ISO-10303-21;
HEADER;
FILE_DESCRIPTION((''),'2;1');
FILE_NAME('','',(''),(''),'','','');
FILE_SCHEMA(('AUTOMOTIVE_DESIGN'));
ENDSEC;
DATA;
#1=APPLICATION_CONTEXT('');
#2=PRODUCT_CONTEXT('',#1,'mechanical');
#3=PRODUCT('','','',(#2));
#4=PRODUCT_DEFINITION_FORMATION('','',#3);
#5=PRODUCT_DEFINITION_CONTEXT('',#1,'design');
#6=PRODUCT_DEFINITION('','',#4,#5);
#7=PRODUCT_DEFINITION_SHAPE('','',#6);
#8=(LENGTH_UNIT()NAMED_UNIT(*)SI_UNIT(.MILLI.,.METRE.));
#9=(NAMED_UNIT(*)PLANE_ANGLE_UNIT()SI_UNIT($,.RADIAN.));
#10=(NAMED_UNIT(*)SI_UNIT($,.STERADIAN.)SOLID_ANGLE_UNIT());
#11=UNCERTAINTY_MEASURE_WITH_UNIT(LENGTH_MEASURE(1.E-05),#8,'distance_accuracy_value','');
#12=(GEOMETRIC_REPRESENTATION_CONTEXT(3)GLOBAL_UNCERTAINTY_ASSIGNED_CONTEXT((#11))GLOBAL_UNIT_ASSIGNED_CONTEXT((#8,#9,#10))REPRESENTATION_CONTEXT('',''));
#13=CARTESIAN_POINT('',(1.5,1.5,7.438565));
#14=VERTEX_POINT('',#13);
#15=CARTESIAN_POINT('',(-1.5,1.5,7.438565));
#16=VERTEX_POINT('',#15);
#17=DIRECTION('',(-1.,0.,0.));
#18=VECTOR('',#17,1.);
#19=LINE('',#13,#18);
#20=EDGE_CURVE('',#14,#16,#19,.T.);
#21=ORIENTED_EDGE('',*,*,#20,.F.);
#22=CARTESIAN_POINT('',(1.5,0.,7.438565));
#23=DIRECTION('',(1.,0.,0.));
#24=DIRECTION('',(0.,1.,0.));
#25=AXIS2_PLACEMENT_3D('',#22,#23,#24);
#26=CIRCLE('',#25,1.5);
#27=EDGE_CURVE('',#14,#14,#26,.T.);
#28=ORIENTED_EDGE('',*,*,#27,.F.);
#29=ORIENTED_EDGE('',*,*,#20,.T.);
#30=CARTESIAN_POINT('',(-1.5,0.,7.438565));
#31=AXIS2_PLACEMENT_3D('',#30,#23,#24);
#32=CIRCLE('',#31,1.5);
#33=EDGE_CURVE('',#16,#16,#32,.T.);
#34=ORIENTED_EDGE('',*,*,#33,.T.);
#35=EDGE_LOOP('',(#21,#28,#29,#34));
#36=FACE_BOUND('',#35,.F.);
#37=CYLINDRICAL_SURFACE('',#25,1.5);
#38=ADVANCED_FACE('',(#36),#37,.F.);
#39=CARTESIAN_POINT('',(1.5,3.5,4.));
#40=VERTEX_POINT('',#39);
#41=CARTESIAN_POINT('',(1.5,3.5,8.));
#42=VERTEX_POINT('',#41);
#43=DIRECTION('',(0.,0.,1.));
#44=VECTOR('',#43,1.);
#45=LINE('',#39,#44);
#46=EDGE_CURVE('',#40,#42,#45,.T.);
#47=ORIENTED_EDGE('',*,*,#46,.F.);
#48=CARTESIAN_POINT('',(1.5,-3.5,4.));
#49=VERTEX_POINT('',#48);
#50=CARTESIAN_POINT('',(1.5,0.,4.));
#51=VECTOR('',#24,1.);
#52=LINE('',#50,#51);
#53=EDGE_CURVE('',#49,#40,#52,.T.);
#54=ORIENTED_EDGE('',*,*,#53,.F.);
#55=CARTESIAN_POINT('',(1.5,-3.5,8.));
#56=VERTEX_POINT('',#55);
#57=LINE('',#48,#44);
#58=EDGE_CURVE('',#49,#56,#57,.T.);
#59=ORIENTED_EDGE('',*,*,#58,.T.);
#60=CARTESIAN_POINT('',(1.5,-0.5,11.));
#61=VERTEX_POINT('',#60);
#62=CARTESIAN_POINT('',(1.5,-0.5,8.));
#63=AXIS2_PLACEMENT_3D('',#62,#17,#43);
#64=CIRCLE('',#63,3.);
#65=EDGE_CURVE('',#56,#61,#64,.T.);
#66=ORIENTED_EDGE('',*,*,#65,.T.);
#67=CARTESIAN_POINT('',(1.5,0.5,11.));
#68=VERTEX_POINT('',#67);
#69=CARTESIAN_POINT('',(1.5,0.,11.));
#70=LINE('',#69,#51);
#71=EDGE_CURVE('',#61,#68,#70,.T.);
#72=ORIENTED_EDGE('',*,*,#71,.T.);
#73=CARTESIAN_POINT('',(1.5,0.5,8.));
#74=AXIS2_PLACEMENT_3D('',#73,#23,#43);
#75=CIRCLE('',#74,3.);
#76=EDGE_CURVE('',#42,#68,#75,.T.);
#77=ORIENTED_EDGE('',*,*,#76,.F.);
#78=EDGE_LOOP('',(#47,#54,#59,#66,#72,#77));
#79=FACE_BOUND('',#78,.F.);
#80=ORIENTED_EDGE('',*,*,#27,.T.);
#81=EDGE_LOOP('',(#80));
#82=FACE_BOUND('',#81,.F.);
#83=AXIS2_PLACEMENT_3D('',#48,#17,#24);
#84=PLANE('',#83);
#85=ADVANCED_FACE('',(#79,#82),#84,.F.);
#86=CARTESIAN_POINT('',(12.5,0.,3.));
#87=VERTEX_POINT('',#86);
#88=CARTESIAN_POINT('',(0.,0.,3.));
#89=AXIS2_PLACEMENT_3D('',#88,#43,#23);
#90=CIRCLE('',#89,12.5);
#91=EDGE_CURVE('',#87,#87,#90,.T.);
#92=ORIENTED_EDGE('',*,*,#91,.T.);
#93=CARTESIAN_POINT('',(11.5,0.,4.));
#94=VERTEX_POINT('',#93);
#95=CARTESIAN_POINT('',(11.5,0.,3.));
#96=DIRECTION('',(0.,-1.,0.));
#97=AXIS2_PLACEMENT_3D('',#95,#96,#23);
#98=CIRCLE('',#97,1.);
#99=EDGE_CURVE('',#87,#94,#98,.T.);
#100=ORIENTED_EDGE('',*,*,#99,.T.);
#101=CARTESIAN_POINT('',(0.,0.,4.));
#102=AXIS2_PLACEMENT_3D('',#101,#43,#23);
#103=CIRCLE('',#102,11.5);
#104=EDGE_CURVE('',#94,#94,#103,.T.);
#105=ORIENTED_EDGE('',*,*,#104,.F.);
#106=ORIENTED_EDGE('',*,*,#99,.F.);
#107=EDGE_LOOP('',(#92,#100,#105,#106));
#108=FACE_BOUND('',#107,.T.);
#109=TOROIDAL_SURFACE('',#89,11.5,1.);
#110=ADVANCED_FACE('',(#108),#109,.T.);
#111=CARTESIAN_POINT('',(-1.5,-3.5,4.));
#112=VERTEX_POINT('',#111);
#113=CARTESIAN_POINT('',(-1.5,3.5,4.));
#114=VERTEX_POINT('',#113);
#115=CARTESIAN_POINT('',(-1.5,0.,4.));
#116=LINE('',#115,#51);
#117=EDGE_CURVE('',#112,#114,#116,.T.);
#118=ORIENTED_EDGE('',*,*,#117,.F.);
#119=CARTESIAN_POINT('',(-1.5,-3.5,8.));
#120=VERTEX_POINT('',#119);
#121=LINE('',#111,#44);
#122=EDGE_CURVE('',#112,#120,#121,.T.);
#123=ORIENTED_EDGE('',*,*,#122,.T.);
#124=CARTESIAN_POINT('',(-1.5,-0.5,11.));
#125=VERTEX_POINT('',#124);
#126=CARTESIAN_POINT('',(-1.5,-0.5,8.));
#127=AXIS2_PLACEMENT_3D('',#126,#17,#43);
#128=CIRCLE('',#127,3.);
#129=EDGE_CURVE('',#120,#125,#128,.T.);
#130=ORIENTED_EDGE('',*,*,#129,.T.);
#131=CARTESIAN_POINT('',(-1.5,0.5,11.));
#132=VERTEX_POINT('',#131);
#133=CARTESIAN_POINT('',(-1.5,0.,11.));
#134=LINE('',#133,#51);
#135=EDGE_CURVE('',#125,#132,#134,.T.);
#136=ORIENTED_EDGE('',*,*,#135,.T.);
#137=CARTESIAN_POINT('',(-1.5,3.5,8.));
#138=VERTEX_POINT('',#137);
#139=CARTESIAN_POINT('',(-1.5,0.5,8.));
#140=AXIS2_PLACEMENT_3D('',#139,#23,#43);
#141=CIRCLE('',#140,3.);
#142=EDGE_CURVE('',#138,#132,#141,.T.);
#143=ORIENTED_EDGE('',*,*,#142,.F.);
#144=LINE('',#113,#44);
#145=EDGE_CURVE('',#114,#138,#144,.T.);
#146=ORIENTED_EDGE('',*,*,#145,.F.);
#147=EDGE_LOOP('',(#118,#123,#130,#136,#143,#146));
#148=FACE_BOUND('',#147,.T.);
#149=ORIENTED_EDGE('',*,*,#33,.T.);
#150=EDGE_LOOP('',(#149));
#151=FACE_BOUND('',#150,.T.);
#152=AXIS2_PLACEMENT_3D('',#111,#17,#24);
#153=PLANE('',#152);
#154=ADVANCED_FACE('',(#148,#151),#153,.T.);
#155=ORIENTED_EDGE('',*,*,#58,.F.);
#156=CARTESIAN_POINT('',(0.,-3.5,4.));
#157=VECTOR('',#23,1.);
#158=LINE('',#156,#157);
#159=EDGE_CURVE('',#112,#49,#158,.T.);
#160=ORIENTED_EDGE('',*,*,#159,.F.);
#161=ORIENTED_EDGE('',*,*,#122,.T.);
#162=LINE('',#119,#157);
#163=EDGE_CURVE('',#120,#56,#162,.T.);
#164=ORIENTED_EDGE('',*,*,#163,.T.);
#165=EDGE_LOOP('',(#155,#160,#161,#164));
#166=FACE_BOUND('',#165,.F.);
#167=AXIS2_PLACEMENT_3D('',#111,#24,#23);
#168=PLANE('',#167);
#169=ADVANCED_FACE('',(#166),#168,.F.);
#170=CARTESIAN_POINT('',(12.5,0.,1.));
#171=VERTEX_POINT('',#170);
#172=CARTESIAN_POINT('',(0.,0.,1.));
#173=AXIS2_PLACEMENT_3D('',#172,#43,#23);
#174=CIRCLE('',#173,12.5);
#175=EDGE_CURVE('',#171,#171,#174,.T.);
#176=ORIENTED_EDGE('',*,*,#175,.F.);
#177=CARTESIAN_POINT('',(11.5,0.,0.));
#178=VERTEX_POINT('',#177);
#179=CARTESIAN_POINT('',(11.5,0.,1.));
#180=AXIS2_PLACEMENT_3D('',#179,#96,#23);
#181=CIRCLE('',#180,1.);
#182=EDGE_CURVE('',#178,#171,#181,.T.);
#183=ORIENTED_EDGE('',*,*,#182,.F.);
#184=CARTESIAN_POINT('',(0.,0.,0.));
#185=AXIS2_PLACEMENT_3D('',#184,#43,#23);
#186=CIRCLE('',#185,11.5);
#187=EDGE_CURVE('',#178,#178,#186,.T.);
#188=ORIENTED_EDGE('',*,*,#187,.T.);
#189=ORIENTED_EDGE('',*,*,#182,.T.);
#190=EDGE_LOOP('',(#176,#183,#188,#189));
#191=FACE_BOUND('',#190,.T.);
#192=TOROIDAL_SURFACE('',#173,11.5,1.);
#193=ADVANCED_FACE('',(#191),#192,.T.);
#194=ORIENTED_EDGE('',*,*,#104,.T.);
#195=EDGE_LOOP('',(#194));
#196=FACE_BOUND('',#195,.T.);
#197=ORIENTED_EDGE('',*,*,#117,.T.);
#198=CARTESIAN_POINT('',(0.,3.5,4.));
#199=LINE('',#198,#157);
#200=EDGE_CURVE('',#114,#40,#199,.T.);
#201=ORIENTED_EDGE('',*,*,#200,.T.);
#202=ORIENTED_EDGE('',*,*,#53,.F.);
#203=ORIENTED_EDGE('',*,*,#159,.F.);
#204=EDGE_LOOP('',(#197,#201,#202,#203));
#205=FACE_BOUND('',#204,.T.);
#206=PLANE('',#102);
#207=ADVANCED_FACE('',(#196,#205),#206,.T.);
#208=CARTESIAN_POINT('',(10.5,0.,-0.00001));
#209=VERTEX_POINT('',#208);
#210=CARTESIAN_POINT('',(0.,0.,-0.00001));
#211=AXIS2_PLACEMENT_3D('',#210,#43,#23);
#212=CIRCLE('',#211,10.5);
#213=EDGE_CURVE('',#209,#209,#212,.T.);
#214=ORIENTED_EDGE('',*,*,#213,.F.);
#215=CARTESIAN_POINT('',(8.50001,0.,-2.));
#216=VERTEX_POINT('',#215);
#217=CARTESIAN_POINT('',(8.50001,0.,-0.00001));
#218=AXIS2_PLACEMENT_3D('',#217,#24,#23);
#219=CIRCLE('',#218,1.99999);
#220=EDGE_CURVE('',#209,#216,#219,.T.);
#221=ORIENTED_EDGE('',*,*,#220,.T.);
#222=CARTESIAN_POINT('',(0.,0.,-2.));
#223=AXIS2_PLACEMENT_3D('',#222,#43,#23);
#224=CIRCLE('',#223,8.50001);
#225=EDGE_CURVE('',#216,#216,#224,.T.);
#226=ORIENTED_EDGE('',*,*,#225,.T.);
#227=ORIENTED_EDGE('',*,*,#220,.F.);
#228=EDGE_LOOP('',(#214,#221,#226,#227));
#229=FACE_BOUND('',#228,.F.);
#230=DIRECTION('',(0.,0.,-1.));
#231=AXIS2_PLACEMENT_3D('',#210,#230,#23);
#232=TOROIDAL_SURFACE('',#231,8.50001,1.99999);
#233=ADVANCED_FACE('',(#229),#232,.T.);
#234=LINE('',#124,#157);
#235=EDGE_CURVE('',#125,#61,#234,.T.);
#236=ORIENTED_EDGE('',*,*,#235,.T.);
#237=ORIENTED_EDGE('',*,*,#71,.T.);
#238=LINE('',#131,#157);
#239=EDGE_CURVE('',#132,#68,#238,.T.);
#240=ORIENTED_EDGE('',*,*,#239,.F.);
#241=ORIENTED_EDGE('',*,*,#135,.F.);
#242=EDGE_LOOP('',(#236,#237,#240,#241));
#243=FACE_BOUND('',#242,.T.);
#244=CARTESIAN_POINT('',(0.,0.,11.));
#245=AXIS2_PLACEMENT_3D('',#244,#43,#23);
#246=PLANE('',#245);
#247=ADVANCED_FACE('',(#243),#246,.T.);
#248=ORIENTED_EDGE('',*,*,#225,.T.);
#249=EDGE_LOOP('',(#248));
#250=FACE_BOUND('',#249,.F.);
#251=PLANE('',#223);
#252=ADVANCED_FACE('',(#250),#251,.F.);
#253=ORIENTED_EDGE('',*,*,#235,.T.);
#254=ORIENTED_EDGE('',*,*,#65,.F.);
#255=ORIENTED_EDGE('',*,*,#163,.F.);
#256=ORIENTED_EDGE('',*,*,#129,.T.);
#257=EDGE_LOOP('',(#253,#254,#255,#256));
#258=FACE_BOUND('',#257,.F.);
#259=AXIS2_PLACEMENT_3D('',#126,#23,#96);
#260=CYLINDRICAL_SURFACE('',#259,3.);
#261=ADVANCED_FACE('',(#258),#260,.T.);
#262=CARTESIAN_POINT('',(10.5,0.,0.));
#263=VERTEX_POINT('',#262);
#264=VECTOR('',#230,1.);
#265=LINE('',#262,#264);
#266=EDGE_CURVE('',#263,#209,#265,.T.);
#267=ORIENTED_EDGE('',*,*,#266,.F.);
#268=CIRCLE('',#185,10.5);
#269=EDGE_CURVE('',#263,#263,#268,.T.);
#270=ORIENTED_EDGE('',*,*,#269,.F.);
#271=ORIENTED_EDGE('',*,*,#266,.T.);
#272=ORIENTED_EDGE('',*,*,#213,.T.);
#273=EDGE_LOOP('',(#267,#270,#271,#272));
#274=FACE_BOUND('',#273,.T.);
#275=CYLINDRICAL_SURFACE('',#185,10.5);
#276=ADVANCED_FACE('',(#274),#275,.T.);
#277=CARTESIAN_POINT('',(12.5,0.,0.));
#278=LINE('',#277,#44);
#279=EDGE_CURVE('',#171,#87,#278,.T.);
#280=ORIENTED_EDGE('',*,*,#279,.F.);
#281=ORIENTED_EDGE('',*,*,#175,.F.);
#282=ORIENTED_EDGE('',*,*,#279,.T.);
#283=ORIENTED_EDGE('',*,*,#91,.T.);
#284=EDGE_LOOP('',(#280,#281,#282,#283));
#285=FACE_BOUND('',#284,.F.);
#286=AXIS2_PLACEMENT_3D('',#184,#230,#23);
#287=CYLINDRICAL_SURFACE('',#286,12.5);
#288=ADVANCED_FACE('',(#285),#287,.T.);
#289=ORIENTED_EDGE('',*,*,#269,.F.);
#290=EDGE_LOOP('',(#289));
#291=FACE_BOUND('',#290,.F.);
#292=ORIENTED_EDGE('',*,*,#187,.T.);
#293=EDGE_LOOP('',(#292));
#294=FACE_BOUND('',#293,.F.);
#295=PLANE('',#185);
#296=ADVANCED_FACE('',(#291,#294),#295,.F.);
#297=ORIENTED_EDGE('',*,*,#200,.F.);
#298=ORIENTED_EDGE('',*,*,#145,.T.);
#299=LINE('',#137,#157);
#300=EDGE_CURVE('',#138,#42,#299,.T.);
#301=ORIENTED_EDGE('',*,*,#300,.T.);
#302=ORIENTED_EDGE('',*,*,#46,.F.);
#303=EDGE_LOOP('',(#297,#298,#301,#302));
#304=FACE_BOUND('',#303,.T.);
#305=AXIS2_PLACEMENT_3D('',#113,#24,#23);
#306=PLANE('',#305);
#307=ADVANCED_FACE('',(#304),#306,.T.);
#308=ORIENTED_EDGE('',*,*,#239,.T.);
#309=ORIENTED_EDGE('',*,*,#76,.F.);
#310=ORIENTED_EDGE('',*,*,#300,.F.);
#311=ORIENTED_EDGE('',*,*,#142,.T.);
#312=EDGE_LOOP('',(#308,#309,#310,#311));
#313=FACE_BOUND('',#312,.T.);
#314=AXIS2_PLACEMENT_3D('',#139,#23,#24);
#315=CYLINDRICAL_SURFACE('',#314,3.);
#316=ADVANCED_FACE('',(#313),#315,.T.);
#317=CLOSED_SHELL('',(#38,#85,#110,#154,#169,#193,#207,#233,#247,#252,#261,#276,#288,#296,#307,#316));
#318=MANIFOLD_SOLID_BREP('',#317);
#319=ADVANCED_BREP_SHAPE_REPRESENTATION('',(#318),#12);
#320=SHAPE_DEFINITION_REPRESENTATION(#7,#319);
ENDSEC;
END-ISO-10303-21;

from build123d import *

# Parameters (mm, degrees)
F0_R     = 10.5
F1_DEPTH = 2
F0_R_2   = 12.5
F2_DEPTH = 4
F3_W     = 3
F3_H     = 7
F4_DEPTH = 7
F6_R     = 3
F5_R     = 1.5
F7_DEPTH = 25
F8_R     = 1.99999
F9_R     = 1


# Not quite as in the source:
# - a fillet or chamfer is up to 0.001 mm smaller than in the source, because OpenCascade refuses the exact size


with BuildPart() as f1:
    # F0 (on Top) → F1 (new body)
    with BuildSketch(Plane.XY):
        Circle(F0_R)
    extrude(amount=-F1_DEPTH)

    # F0 (on Top) → F2 (join)
    with BuildSketch(Plane.XY):
        Circle(F0_R_2)
        Circle(F0_R, mode=Mode.SUBTRACT)
        Circle(F0_R)
    extrude(amount=F2_DEPTH)

    # F3 (on face) → F4 (join)
    with BuildSketch(Plane.XY.offset(4)):
        Rectangle(F3_W, F3_H)
    extrude(amount=F4_DEPTH)

    # F6
    f6_edges = [f1.edges().sort_by_distance(p)[0] for p in [
        (0, -3.5, 11),
        (0, 3.5, 11),
    ]]
    fillet(f6_edges, radius=F6_R)

    # F5 (on face) → F7 (cut)
    with BuildSketch(Plane.YZ.offset(1.5)):
        with Locations((0, 7.438564696)):
            Circle(F5_R)
    extrude(amount=-F7_DEPTH, mode=Mode.SUBTRACT)

    # F8 (radius 2 in the source; OpenCascade refuses exactly that, so slightly less here)
    f8_edges = [f1.edges().sort_by_distance(p)[0] for p in [
        (-10.5, 0, -2),
    ]]
    fillet(f8_edges, radius=F8_R)

    # F9
    f9_edges = [f1.edges().sort_by_distance(p)[0] for p in [
        (12.5, 0, 2),
        (-12.5, 0, 0),
        (-12.5, 0, 4),
    ]]
    fillet(f9_edges, radius=F9_R)


solid = f1.part
